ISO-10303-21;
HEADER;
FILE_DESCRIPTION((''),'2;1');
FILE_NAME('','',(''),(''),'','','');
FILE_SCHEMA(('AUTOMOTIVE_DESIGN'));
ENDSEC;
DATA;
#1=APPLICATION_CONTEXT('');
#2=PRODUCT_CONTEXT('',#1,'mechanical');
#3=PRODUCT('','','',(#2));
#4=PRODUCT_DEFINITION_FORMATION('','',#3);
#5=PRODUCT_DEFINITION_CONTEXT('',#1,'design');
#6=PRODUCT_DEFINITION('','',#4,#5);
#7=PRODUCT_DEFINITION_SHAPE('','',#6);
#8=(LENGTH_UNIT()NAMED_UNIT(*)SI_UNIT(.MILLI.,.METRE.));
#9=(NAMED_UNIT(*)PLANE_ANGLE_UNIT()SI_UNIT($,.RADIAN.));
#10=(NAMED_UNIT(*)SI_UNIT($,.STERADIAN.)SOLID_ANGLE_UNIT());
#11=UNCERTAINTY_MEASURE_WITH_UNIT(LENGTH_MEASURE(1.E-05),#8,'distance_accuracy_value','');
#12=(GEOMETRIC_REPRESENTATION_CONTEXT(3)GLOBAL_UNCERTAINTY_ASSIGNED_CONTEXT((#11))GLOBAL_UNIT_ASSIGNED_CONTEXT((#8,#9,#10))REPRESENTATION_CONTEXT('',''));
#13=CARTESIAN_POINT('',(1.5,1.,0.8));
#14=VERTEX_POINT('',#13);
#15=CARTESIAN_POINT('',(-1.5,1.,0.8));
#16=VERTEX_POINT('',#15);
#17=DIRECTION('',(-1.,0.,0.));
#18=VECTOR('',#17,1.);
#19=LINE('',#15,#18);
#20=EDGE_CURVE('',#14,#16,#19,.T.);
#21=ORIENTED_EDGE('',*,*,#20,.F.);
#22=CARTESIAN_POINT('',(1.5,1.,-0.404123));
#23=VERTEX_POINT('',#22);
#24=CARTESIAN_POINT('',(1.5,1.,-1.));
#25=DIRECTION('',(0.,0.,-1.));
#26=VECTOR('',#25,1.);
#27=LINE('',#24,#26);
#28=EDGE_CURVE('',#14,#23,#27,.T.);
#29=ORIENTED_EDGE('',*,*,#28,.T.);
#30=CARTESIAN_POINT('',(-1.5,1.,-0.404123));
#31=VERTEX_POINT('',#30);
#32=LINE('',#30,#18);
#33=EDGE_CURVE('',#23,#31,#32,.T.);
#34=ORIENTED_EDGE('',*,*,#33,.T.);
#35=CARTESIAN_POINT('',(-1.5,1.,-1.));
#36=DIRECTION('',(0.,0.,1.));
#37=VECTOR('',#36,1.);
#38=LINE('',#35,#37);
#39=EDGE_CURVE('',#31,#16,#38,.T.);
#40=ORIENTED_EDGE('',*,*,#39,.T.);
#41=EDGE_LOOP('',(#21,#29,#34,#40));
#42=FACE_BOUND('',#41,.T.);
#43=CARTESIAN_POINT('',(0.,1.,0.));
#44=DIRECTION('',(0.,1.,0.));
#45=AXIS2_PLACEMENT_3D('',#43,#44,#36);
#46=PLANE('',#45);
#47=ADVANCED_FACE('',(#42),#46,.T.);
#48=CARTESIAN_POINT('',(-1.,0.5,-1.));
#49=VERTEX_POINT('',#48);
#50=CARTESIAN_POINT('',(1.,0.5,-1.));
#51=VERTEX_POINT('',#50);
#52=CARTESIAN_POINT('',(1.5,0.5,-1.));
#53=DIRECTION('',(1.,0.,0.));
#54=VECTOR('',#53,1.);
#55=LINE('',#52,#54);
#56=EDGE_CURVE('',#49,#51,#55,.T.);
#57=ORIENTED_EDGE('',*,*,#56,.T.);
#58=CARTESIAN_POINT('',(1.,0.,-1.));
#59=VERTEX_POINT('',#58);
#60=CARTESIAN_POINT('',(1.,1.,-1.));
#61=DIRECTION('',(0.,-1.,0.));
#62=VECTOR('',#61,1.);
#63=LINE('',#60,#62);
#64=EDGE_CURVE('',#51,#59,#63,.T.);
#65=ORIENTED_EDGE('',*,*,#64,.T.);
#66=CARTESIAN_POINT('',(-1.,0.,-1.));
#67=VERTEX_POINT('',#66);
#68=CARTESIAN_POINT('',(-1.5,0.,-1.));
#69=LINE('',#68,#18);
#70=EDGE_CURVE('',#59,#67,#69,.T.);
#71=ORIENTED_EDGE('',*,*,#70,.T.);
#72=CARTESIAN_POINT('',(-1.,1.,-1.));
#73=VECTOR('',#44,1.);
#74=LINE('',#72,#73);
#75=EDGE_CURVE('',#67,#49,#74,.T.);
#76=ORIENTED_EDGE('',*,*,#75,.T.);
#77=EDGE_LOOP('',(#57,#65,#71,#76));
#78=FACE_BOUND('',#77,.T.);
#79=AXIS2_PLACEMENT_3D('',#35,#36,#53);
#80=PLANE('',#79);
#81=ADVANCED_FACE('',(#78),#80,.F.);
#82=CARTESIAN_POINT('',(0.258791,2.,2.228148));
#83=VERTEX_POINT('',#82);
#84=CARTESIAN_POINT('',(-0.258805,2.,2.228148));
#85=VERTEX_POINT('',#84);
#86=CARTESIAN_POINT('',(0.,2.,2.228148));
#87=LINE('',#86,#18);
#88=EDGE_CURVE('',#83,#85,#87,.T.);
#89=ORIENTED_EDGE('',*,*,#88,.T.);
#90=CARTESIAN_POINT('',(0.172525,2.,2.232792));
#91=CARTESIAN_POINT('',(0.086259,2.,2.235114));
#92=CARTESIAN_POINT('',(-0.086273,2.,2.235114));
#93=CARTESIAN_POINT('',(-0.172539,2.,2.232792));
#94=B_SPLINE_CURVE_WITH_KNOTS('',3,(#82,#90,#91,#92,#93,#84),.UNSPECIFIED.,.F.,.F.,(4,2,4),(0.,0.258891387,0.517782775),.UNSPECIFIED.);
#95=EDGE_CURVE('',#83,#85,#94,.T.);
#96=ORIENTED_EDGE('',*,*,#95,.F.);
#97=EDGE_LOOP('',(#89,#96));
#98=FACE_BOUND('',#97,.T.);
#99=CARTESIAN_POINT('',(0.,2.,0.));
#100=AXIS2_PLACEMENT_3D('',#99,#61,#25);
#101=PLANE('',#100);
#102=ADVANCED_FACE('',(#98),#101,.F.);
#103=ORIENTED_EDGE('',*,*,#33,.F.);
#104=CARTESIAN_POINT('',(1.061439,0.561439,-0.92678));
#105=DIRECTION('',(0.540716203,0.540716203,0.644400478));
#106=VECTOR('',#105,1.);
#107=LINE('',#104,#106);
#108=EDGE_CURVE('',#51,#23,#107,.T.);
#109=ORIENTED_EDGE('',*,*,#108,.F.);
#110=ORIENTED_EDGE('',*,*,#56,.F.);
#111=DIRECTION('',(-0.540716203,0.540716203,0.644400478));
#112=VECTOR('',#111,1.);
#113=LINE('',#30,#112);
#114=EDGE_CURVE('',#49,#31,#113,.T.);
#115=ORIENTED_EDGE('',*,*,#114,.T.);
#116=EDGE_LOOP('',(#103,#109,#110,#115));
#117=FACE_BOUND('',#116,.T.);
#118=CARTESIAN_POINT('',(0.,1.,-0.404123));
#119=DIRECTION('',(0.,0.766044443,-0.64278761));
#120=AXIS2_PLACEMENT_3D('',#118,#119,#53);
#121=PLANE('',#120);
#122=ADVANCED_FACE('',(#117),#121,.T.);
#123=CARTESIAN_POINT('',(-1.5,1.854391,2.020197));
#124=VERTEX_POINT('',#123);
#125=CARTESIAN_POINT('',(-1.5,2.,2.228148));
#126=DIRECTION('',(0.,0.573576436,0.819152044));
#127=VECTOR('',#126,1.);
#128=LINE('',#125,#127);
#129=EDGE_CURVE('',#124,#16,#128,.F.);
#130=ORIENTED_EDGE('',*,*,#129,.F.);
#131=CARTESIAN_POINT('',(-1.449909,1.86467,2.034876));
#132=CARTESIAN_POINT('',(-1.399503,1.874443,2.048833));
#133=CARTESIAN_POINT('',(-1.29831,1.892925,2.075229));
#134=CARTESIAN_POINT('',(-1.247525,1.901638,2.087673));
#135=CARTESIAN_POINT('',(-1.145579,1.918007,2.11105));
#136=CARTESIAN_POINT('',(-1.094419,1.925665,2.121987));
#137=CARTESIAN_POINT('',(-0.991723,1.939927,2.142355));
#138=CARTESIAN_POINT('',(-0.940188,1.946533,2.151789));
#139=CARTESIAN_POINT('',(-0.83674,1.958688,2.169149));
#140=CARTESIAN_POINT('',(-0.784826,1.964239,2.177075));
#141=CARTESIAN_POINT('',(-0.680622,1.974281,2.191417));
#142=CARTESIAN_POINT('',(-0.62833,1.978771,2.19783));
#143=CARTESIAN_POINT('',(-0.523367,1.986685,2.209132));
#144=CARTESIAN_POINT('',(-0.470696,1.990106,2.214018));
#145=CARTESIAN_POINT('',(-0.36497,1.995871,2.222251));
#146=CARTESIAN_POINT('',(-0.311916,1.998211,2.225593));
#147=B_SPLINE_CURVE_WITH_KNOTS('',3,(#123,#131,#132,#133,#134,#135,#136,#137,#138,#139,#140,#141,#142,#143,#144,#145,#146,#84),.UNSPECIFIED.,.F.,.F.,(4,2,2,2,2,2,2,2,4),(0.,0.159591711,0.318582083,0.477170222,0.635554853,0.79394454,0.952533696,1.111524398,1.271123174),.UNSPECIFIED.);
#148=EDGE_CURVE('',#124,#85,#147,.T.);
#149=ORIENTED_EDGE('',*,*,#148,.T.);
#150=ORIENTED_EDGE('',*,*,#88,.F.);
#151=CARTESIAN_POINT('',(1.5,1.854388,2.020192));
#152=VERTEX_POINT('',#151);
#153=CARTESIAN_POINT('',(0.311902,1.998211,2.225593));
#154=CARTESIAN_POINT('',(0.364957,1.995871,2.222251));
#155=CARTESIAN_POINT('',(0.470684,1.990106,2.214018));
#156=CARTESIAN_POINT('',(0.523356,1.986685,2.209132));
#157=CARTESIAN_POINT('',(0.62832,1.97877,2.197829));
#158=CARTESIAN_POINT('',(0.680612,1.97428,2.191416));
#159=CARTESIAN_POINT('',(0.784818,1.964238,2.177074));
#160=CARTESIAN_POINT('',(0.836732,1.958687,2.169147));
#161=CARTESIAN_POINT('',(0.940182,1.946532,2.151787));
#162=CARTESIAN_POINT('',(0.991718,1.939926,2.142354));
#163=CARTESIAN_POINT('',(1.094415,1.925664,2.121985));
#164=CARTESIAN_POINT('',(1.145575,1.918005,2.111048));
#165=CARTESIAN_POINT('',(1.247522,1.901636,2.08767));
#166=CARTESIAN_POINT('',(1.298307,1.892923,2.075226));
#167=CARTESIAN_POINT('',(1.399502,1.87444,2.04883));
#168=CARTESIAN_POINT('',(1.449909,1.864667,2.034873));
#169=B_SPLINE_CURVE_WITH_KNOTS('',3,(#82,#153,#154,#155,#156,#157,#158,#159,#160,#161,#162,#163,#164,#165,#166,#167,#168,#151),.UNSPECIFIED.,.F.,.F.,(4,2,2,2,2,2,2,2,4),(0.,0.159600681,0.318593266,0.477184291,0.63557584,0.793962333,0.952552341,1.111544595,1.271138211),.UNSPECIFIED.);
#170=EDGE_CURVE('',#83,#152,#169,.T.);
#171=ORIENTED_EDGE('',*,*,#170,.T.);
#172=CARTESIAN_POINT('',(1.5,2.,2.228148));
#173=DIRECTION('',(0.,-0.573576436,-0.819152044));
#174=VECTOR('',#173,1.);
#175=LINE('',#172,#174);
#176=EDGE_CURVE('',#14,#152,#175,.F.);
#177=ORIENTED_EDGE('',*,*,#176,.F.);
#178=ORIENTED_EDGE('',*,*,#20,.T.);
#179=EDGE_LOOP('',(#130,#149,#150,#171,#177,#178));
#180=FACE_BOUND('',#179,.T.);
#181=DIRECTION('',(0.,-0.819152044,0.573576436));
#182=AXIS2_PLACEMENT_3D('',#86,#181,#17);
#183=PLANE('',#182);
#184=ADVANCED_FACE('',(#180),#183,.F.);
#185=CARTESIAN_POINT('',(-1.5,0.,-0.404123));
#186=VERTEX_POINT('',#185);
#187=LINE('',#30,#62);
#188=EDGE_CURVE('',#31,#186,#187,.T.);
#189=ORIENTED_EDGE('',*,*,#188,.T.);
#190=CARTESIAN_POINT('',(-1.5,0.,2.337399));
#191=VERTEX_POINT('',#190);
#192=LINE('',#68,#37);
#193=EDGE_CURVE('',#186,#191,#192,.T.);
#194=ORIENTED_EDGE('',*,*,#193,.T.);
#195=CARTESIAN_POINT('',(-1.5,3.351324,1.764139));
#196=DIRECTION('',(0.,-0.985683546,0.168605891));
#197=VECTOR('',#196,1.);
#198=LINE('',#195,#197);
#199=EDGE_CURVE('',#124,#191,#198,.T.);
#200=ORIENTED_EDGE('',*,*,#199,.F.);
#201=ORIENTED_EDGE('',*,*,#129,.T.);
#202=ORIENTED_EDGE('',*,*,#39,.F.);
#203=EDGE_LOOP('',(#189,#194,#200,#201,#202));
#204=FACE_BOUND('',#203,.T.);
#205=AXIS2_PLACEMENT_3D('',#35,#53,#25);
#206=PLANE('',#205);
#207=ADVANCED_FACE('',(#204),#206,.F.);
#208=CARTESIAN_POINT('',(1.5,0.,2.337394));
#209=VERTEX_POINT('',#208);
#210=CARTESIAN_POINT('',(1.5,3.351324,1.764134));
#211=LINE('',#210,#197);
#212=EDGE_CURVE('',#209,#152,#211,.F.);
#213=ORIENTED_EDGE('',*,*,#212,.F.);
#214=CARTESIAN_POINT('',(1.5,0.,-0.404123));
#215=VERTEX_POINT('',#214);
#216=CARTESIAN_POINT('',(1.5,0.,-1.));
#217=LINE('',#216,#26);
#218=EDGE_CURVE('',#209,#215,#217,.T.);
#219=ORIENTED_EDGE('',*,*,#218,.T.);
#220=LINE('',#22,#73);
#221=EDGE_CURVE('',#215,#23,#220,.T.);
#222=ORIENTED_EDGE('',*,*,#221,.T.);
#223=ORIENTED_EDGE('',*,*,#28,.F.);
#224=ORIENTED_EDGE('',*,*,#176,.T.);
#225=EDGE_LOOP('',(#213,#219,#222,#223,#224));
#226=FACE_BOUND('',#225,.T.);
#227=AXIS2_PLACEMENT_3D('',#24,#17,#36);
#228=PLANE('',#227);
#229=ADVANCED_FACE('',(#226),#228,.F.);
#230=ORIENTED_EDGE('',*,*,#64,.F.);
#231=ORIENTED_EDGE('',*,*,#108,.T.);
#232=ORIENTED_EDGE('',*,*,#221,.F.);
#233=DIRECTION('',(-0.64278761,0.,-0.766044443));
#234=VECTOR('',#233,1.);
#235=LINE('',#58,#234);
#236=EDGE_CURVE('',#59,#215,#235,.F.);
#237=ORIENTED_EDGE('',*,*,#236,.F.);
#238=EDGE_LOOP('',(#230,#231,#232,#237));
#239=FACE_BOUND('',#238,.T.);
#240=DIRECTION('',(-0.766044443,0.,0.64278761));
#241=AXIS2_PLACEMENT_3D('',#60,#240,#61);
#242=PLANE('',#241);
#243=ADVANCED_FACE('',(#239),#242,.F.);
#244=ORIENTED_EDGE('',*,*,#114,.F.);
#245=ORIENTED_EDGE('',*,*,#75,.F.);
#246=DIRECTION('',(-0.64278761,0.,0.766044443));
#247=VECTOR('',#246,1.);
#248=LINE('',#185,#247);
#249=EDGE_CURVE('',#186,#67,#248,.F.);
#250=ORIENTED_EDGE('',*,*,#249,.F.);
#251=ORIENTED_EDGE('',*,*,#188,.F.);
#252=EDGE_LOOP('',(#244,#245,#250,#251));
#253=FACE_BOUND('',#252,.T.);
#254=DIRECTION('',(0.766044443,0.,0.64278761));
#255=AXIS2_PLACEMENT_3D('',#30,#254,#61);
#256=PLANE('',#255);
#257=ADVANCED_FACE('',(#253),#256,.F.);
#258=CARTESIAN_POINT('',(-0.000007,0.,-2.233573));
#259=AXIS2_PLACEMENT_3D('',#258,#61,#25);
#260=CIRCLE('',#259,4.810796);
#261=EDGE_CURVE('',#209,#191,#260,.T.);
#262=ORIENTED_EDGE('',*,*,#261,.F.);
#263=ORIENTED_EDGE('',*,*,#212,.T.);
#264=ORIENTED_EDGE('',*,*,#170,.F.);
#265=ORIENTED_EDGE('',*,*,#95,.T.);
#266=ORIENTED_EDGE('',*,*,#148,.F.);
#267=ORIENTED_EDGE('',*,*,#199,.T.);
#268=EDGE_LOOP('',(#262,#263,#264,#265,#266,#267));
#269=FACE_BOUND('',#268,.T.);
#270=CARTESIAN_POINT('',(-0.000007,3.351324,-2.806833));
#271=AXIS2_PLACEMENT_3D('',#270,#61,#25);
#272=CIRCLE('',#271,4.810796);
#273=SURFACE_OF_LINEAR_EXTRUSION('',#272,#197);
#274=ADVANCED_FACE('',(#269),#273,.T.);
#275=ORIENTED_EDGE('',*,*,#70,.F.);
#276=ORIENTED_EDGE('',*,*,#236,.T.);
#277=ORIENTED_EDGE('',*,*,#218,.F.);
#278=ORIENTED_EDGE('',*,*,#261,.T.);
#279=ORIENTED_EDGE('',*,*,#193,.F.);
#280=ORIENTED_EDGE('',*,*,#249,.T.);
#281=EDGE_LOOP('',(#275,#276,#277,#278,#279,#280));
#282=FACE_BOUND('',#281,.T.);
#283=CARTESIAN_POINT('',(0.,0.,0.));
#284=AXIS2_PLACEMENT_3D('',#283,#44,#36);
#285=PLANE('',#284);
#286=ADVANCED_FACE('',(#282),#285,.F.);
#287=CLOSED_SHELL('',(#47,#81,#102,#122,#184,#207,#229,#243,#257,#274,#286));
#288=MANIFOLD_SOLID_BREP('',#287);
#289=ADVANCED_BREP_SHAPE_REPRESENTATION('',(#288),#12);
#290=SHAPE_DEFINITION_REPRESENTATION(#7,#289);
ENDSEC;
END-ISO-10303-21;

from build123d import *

# Parameters (mm, degrees)
SKETCH_1_W          = 3
SKETCH_1_H          = 3.8
EXTRUDE_1_DEPTH     = 1
SKETCH_2_W          = 3
SKETCH_2_H          = 2
EXTRUDE_2_DEPTH     = 1
CHAMFER_1_SIZE      = 0.5
CHAMFER_1_SIZE2     = 0.595876796
CHAMFER_3_SIZE      = 1
CHAMFER_3_SIZE_2    = 1.428148007
CUT_EXTRUDE_1_DEPTH = 3.4


with BuildPart() as part:
    # 草图1 → 凸台-拉伸1 (new body)
    with BuildSketch(Plane(origin=(0, 0, 0), x_dir=(1, 0, 0), z_dir=(0, 1, 0))):
        with Locations((0, -0.9)):
            Rectangle(SKETCH_1_W, SKETCH_1_H)
    extrude(amount=EXTRUDE_1_DEPTH)

    # 草图2 → 凸台-拉伸2 (add)
    with BuildSketch(Plane(origin=(0, 1, 0), x_dir=(1, 0, 0), z_dir=(0, 1, 0))):
        with Locations((0, -1.8)):
            Rectangle(SKETCH_2_W, SKETCH_2_H)
    extrude(amount=EXTRUDE_2_DEPTH)

    # 倒角1
    chamfer_1_edges = [part.edges().sort_by_distance(p)[0] for p in [
        (0, 1, -1),
        (-1.5, 0.5, -1),
        (1.5, 0.5, -1),
    ]]
    chamfer_1_side = [part.faces().sort_by_distance(p)[0] for p in [
        (0, 0.5, -1),
    ]]
    chamfer(chamfer_1_edges, length=CHAMFER_1_SIZE, length2=CHAMFER_1_SIZE2, reference=chamfer_1_side[0])

    # 倒角3
    # the kernel refuses this chamfer: 1.428148007, 1 mm, written as the material it takes off along each edge
    with BuildSketch(Plane(origin=(5.18826682, 2, 0.8), x_dir=(0, -0.9989750717851554, -0.04526373771402124), z_dir=(-1, 0, 0))) as chamfer_3_piece_1_section:
        Polygon((CHAMFER_3_SIZE * 0.998975071785, CHAMFER_3_SIZE * 0.045263737714), (-CHAMFER_3_SIZE_2 * 0.0452637377058, CHAMFER_3_SIZE_2 * 0.998975071605), (0, 0), align=None)
    chamfer_3_piece_1 = extrude(amount=10.37653364, mode=Mode.PRIVATE)
    chamfer_3_piece_1 = split(chamfer_3_piece_1, bisect_by=Plane(origin=(0, 1, 1.276872226), z_dir=(0, 1, 0)), keep=Keep.TOP, mode=Mode.PRIVATE)
    add(chamfer_3_piece_1, mode=Mode.SUBTRACT)

    # 草图4 → 切除-拉伸1 (cut, along a direction that is not the sketch's normal)
    with BuildSketch(Plane.XZ):
        with BuildLine():
            Line((1.59999292, 2.303360359), (2.090500244, 2.793867684))
            Line((2.090500244, 2.793867684), (1.845246582, 3.265265737))
            Line((1.845246582, 3.265265737), (0.278729323, 3.46880384))
            Line((0.278729323, 3.46880384), (-0.130829053, 3.46880384))
            Line((-0.130829053, 3.46880384), (-1.91054636, 3.486179043))
            Line((-1.91054636, 3.486179043), (-2.191031794, 2.570257584))
            Line((-2.191031794, 2.570257584), (-1.60000708, 2.303360359))
            ThreePointArc((-1.60000708, 2.303360359), (-7.08e-06, 2.577223661), (1.59999292, 2.303360359))
        make_face()
    extrude(amount=-CUT_EXTRUDE_1_DEPTH, dir=(0, -0.9856835463912937, 0.16860589068440726), mode=Mode.SUBTRACT)


solid = part.part
